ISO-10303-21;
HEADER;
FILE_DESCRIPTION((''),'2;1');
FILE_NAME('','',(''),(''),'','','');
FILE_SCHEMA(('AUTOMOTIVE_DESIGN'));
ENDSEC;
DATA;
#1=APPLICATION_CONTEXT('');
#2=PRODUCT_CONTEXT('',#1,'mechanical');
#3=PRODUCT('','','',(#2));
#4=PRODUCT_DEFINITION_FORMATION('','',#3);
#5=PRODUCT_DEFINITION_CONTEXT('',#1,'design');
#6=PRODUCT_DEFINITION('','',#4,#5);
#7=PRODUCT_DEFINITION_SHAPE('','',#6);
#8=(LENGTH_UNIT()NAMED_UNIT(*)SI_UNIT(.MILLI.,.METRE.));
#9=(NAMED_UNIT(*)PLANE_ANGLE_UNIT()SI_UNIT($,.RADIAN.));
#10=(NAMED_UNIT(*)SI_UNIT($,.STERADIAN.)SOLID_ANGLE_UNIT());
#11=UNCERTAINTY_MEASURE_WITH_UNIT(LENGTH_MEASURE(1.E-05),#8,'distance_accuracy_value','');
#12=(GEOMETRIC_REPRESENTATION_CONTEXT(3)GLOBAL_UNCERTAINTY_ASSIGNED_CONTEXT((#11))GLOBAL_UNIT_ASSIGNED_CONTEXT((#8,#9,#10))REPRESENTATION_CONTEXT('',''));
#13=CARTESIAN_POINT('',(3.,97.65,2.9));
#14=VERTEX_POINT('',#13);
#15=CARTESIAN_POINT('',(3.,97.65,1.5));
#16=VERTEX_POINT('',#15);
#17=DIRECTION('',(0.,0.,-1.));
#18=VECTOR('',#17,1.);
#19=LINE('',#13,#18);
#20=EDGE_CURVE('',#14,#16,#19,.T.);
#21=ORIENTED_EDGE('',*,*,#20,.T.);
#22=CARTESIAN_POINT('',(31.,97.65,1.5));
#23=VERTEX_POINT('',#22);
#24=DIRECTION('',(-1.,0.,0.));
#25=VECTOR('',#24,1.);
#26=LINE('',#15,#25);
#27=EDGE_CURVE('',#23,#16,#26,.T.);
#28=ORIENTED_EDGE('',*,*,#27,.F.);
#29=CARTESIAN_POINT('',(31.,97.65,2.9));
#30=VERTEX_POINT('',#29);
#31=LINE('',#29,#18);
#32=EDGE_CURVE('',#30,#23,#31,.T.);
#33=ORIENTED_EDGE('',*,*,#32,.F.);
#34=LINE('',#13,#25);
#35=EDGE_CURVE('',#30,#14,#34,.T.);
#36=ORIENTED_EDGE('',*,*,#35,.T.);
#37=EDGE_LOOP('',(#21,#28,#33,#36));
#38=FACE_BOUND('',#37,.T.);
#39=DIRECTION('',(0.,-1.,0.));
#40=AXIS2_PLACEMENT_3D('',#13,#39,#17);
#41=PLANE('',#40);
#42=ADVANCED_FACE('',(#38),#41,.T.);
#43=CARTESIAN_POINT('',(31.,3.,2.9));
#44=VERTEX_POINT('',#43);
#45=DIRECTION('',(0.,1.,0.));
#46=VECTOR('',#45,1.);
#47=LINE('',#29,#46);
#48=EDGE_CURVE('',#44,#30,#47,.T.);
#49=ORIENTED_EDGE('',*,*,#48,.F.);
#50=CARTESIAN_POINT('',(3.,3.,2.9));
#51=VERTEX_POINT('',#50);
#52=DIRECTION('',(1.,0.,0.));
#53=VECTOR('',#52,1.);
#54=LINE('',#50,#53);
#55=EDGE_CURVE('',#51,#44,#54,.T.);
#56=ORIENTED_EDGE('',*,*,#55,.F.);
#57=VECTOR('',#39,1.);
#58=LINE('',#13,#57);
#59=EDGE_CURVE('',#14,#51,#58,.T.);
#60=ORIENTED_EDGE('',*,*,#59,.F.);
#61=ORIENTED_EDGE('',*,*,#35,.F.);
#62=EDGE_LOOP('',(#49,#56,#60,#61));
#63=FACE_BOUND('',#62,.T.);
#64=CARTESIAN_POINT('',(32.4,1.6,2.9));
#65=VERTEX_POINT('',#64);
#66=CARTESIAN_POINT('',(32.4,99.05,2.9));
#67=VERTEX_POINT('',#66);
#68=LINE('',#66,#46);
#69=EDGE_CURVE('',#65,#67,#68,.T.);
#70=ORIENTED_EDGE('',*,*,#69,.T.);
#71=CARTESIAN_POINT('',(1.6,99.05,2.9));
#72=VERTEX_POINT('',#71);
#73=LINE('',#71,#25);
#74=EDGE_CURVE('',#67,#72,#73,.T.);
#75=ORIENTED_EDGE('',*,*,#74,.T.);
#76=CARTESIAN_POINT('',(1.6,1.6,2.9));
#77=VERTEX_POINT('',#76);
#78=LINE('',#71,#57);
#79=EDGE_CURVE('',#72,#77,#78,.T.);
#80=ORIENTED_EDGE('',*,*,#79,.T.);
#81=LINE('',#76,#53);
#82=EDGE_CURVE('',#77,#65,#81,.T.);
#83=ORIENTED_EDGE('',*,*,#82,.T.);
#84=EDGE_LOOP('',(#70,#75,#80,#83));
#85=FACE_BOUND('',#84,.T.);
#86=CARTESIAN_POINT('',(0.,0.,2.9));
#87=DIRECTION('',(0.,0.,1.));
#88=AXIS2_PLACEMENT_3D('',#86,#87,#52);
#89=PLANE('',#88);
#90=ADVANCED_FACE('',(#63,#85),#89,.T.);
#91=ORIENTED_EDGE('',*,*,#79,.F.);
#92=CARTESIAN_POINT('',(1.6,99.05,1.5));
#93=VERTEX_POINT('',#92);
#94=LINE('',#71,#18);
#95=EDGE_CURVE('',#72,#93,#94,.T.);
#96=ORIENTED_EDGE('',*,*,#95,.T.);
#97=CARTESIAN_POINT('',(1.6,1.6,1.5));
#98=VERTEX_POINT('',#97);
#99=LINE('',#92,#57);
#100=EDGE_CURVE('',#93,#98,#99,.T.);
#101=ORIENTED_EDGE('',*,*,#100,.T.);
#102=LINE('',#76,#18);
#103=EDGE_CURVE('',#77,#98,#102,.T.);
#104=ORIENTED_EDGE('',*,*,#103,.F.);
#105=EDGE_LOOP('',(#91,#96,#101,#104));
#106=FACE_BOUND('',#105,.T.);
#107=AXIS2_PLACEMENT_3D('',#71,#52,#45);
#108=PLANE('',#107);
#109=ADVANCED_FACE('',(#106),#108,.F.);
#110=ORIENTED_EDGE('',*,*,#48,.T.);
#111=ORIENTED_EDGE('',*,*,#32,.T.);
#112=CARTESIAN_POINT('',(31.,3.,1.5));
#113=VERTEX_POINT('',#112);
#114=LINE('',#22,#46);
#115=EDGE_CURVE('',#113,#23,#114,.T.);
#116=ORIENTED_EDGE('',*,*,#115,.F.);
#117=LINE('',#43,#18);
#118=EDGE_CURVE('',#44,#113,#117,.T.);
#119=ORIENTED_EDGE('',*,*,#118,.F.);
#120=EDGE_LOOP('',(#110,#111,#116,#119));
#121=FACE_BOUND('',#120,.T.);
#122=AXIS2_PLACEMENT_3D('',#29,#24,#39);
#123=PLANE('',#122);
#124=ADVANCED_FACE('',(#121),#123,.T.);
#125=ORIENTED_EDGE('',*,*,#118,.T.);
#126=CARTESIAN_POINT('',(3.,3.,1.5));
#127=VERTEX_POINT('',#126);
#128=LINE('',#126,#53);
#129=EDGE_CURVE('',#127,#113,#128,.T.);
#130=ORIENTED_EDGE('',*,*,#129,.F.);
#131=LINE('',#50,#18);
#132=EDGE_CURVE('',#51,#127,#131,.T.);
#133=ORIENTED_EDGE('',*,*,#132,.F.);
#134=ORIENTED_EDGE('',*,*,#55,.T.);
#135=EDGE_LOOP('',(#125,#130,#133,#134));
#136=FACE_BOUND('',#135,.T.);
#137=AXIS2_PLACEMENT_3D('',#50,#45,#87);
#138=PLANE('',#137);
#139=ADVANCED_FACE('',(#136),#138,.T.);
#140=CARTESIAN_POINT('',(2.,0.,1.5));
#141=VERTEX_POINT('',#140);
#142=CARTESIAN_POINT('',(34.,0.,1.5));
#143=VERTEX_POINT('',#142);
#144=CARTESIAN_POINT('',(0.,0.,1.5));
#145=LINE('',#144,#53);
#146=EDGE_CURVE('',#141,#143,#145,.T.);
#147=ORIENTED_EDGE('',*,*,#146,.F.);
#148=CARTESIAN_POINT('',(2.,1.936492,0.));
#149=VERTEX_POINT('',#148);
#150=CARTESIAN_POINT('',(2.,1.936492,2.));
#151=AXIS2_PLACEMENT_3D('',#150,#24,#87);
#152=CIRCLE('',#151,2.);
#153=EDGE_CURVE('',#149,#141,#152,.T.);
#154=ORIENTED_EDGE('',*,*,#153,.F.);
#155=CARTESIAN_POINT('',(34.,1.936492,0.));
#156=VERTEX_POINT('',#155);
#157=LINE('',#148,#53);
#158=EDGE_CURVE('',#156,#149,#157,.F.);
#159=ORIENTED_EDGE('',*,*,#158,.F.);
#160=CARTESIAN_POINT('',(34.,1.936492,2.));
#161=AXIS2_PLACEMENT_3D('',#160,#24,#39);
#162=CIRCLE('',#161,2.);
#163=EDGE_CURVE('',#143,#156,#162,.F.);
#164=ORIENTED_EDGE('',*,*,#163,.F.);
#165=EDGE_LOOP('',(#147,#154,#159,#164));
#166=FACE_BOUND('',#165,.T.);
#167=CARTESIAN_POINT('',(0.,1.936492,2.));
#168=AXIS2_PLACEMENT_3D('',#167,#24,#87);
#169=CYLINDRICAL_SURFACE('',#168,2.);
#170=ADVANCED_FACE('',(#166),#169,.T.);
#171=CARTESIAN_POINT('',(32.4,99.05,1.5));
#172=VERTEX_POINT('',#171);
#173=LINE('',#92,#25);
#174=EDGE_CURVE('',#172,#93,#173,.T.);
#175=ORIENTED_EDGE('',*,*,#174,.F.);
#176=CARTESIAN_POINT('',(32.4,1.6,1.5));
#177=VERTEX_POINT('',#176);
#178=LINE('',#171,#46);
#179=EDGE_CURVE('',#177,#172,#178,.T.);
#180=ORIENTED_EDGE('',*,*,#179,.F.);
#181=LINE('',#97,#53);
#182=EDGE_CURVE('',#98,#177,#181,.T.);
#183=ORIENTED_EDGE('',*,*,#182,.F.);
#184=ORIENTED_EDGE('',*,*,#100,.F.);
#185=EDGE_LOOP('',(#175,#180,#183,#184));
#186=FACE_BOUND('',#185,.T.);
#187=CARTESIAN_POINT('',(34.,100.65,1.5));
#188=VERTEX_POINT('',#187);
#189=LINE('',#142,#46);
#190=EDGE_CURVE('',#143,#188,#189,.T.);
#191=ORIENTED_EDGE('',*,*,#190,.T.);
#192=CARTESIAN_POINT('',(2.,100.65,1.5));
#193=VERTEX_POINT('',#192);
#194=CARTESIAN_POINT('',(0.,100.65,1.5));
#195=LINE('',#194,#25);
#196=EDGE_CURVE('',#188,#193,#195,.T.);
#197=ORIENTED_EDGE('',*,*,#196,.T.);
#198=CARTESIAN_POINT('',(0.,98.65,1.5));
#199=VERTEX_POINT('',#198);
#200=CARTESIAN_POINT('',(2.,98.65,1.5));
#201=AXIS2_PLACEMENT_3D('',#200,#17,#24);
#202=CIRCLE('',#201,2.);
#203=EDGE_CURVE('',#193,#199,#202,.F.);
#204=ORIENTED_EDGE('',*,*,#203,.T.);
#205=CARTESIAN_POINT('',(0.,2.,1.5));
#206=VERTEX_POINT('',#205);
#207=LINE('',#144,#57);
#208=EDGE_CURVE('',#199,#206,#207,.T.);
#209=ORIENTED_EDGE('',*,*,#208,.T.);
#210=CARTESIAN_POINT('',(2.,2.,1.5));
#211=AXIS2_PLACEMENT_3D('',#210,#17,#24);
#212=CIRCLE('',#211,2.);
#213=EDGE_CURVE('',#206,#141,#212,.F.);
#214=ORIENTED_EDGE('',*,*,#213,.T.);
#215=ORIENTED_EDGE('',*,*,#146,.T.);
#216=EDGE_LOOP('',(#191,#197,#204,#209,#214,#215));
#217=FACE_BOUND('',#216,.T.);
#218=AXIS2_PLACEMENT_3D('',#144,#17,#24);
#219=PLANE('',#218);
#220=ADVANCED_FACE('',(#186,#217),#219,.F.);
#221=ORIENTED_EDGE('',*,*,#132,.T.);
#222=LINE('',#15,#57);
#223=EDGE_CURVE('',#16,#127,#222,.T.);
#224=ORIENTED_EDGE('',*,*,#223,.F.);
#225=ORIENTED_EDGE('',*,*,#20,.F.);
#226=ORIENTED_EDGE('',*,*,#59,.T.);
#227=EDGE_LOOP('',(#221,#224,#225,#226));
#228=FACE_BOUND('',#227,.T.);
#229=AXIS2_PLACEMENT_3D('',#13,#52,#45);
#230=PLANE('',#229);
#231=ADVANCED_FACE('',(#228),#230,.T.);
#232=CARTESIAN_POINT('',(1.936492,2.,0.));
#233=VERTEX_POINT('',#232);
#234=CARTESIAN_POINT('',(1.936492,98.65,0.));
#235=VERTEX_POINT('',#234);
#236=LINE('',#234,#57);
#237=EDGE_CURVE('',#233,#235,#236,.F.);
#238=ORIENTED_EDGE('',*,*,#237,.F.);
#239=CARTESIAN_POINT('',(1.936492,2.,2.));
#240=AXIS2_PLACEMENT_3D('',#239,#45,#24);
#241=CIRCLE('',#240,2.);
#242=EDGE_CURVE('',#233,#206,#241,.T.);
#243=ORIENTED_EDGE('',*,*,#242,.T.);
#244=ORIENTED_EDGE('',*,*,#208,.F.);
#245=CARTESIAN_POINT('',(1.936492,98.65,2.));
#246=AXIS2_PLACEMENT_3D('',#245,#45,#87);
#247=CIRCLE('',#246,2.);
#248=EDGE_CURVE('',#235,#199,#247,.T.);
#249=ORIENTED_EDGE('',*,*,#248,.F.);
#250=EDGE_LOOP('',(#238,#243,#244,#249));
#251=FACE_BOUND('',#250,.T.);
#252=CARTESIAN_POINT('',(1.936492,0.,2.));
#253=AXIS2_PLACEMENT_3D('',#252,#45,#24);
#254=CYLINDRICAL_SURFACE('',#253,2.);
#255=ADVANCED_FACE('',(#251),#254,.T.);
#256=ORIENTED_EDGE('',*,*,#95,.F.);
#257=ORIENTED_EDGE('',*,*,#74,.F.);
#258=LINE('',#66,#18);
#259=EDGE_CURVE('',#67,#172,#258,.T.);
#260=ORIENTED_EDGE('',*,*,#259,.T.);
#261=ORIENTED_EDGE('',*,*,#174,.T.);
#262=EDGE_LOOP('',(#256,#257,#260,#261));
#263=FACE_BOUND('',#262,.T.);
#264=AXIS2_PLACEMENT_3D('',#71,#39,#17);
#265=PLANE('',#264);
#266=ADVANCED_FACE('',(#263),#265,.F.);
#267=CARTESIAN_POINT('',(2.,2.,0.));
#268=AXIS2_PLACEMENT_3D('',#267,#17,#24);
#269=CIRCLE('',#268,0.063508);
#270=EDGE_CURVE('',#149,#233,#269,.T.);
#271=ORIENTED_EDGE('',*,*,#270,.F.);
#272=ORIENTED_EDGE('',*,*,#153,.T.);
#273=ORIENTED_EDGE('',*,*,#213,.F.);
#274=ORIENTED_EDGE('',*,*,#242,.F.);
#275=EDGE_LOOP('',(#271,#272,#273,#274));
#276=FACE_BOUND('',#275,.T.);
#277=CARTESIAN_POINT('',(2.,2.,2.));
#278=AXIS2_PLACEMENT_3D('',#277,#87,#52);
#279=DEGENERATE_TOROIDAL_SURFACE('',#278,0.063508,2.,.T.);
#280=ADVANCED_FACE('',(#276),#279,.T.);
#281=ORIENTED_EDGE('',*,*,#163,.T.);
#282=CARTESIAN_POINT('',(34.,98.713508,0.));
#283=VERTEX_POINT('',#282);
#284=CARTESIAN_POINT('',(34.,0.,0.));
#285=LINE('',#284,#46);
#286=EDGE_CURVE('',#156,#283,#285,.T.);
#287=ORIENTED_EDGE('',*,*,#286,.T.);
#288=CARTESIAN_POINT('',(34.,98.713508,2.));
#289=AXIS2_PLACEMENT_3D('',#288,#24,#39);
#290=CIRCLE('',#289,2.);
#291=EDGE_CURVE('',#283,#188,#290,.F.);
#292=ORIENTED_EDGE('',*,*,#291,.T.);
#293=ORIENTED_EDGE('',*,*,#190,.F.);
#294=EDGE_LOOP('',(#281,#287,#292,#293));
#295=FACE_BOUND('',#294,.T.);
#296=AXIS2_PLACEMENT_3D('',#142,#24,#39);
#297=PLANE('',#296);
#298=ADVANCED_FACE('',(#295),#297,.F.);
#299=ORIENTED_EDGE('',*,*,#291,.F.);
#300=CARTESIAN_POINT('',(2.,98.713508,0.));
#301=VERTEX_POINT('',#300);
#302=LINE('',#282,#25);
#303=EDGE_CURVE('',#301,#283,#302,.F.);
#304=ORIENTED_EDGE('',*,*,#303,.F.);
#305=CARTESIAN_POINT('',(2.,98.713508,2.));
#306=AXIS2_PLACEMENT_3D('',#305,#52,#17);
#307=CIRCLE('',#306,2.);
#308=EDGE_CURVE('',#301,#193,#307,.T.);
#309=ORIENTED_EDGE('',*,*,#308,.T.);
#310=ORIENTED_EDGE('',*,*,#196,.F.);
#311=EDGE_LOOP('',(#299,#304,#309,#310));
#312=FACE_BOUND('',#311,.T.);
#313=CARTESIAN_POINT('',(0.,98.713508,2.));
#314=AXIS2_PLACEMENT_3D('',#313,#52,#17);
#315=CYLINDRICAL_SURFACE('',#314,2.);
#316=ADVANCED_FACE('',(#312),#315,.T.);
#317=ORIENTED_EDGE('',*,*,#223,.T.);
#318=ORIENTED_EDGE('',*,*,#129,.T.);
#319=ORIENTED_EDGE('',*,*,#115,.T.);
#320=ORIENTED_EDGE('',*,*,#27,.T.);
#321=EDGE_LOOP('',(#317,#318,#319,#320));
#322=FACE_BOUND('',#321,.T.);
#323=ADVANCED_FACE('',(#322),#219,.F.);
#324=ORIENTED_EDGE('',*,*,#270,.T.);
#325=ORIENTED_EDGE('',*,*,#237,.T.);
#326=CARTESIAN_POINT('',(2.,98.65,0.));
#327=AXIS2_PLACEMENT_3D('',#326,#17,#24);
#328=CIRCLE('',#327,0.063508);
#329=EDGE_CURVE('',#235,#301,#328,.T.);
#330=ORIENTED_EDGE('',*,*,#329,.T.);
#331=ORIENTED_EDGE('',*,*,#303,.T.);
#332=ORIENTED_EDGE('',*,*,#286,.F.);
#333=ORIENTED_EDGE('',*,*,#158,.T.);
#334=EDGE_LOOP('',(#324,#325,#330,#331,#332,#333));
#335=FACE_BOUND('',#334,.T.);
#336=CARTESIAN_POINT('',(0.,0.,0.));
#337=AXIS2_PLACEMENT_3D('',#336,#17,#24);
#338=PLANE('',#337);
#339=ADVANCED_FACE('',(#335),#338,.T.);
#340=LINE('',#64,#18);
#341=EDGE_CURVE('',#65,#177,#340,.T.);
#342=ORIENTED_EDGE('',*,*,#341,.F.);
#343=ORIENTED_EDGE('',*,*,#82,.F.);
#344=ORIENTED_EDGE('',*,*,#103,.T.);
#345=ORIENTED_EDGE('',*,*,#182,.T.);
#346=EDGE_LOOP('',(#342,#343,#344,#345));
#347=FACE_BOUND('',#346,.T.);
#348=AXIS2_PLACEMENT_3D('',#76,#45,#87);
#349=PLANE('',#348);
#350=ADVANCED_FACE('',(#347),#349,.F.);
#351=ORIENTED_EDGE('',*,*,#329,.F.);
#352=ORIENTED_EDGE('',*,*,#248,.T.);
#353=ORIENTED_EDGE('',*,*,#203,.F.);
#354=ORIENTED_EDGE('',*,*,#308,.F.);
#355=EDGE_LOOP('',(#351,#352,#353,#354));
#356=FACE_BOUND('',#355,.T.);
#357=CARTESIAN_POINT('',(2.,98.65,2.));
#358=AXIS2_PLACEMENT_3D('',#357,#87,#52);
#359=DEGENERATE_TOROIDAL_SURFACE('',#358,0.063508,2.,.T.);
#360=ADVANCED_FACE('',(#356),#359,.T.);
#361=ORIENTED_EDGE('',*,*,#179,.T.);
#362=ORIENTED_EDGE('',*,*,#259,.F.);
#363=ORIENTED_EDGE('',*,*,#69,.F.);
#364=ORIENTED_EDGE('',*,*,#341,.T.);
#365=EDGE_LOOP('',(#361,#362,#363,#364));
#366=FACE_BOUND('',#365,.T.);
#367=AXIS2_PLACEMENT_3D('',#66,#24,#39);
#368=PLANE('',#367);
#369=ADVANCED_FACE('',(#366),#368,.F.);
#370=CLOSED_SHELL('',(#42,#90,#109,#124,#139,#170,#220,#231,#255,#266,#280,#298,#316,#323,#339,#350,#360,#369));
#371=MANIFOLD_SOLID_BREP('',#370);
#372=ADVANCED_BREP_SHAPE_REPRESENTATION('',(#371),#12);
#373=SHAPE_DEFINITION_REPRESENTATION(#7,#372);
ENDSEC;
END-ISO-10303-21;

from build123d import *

# Parameters (mm, degrees)
ESQUISSE1_W        = 34
ESQUISSE1_H        = 100.65
BOSS_EXTRU_1_DEPTH = 1.5
ESQUISSE2_W        = 30.8
ESQUISSE2_H        = 97.45
ESQUISSE2_W_2      = 28
ESQUISSE2_H_2      = 94.65
BOSS_EXTRU_2_DEPTH = 1.4
CONG_6_R           = 2
CONG_8_R           = 2
CONG_9_R           = 2


with BuildPart() as part:
    # Esquisse1 → Boss.-Extru.1 (new body)
    with BuildSketch(Plane.XY):
        with Locations((17, 50.325)):
            Rectangle(ESQUISSE1_W, ESQUISSE1_H)
    extrude(amount=BOSS_EXTRU_1_DEPTH)

    # Esquisse2 → Boss.-Extru.2 (add)
    with BuildSketch(Plane.XY.offset(1.5)):
        with Locations((17, 50.325)):
            Rectangle(ESQUISSE2_W, ESQUISSE2_H)
        with Locations((17, 50.325)):
            Rectangle(ESQUISSE2_W_2, ESQUISSE2_H_2, mode=Mode.SUBTRACT)
    extrude(amount=BOSS_EXTRU_2_DEPTH)

    # Congé6
    cong_6_edges = [part.edges().sort_by_distance(p)[0] for p in [
        (0, 0, 0.75),
    ]]
    fillet(cong_6_edges, radius=CONG_6_R)

    # Congé8
    cong_8_edges = [part.edges().sort_by_distance(p)[0] for p in [
        (0, 100.65, 0.75),
    ]]
    fillet(cong_8_edges, radius=CONG_8_R)

    # Congé9
    # the kernel refuses this fillet: 2 mm, written as the material it takes off along each edge
    with BuildSketch(Plane(origin=(38.841229183, 100.65, 0), x_dir=(0, -1, 0), z_dir=(-1, 0, 0)), Plane(origin=(2, 0, 0), x_dir=(0, 1, 0), z_dir=(1, 0, 0))) as cong_9_piece_1:
        with BuildLine():
            CenterArc((1.936491673, 2), CONG_9_R, 194.477512186, 75.522487814)
            Line((0, 1.5), (-0.038729833, 1.49))
            ThreePointArc((-0.038729833, 1.49), (-0.04, 0.75), (-0.04, 0))
            Line((-0.04, 0), (0, -0.04))
            Line((0, -0.04), (1.936491673, -0.04))
            Line((1.936491673, -0.04), (1.936491673, 0))
        make_face()
    extrude(amount=36.841229183, mode=Mode.SUBTRACT)
    with BuildSketch(Plane(origin=(2, 98.65, 0), x_dir=(-1, 0, 0), z_dir=(0, -1, 0))) as cong_9_piece_2:
        with BuildLine():
            CenterArc((0.063508327, -2), CONG_9_R, 14.477512186, 75.522487814)
            Line((2, -1.5), (2.038729833, -1.49))
            ThreePointArc((2.038729833, -1.49), (2.04, -0.75), (2.04, 0))
            Line((2.04, 0), (2, 0.04))
            Line((2, 0.04), (0.063508327, 0.04))
            Line((0.063508327, 0.04), (0.063508327, 0))
        make_face()
    revolve(axis=Axis((2, 98.65, 0), (0, 0, -1)), revolution_arc=90, mode=Mode.SUBTRACT)
    with BuildSketch(Plane(origin=(0, 98.65, 0), x_dir=(1, 0, 0), z_dir=(0, -1, 0))) as cong_9_piece_3:
        with BuildLine():
            CenterArc((1.936491673, 2), CONG_9_R, 194.477512186, 75.522487814)
            Line((0, 1.5), (-0.038729833, 1.49))
            ThreePointArc((-0.038729833, 1.49), (-0.04, 0.75), (-0.04, 0))
            Line((-0.04, 0), (0, -0.04))
            Line((0, -0.04), (1.936491673, -0.04))
            Line((1.936491673, -0.04), (1.936491673, 0))
        make_face()
    extrude(amount=96.65, mode=Mode.SUBTRACT)
    with BuildSketch(Plane(origin=(2, 2, 0), x_dir=(0, -1, 0), z_dir=(1, 0, 0))) as cong_9_piece_4:
        with BuildLine():
            CenterArc((0.063508327, -2), CONG_9_R, 14.477512186, 75.522487814)
            Line((2, -1.5), (2.038729833, -1.49))
            ThreePointArc((2.038729833, -1.49), (2.04, -0.75), (2.04, 0))
            Line((2.04, 0), (2, 0.04))
            Line((2, 0.04), (0.063508327, 0.04))
            Line((0.063508327, 0.04), (0.063508327, 0))
        make_face()
    revolve(axis=Axis((2, 2, 0), (0, 0, -1)), revolution_arc=90, mode=Mode.SUBTRACT)


solid = part.part
